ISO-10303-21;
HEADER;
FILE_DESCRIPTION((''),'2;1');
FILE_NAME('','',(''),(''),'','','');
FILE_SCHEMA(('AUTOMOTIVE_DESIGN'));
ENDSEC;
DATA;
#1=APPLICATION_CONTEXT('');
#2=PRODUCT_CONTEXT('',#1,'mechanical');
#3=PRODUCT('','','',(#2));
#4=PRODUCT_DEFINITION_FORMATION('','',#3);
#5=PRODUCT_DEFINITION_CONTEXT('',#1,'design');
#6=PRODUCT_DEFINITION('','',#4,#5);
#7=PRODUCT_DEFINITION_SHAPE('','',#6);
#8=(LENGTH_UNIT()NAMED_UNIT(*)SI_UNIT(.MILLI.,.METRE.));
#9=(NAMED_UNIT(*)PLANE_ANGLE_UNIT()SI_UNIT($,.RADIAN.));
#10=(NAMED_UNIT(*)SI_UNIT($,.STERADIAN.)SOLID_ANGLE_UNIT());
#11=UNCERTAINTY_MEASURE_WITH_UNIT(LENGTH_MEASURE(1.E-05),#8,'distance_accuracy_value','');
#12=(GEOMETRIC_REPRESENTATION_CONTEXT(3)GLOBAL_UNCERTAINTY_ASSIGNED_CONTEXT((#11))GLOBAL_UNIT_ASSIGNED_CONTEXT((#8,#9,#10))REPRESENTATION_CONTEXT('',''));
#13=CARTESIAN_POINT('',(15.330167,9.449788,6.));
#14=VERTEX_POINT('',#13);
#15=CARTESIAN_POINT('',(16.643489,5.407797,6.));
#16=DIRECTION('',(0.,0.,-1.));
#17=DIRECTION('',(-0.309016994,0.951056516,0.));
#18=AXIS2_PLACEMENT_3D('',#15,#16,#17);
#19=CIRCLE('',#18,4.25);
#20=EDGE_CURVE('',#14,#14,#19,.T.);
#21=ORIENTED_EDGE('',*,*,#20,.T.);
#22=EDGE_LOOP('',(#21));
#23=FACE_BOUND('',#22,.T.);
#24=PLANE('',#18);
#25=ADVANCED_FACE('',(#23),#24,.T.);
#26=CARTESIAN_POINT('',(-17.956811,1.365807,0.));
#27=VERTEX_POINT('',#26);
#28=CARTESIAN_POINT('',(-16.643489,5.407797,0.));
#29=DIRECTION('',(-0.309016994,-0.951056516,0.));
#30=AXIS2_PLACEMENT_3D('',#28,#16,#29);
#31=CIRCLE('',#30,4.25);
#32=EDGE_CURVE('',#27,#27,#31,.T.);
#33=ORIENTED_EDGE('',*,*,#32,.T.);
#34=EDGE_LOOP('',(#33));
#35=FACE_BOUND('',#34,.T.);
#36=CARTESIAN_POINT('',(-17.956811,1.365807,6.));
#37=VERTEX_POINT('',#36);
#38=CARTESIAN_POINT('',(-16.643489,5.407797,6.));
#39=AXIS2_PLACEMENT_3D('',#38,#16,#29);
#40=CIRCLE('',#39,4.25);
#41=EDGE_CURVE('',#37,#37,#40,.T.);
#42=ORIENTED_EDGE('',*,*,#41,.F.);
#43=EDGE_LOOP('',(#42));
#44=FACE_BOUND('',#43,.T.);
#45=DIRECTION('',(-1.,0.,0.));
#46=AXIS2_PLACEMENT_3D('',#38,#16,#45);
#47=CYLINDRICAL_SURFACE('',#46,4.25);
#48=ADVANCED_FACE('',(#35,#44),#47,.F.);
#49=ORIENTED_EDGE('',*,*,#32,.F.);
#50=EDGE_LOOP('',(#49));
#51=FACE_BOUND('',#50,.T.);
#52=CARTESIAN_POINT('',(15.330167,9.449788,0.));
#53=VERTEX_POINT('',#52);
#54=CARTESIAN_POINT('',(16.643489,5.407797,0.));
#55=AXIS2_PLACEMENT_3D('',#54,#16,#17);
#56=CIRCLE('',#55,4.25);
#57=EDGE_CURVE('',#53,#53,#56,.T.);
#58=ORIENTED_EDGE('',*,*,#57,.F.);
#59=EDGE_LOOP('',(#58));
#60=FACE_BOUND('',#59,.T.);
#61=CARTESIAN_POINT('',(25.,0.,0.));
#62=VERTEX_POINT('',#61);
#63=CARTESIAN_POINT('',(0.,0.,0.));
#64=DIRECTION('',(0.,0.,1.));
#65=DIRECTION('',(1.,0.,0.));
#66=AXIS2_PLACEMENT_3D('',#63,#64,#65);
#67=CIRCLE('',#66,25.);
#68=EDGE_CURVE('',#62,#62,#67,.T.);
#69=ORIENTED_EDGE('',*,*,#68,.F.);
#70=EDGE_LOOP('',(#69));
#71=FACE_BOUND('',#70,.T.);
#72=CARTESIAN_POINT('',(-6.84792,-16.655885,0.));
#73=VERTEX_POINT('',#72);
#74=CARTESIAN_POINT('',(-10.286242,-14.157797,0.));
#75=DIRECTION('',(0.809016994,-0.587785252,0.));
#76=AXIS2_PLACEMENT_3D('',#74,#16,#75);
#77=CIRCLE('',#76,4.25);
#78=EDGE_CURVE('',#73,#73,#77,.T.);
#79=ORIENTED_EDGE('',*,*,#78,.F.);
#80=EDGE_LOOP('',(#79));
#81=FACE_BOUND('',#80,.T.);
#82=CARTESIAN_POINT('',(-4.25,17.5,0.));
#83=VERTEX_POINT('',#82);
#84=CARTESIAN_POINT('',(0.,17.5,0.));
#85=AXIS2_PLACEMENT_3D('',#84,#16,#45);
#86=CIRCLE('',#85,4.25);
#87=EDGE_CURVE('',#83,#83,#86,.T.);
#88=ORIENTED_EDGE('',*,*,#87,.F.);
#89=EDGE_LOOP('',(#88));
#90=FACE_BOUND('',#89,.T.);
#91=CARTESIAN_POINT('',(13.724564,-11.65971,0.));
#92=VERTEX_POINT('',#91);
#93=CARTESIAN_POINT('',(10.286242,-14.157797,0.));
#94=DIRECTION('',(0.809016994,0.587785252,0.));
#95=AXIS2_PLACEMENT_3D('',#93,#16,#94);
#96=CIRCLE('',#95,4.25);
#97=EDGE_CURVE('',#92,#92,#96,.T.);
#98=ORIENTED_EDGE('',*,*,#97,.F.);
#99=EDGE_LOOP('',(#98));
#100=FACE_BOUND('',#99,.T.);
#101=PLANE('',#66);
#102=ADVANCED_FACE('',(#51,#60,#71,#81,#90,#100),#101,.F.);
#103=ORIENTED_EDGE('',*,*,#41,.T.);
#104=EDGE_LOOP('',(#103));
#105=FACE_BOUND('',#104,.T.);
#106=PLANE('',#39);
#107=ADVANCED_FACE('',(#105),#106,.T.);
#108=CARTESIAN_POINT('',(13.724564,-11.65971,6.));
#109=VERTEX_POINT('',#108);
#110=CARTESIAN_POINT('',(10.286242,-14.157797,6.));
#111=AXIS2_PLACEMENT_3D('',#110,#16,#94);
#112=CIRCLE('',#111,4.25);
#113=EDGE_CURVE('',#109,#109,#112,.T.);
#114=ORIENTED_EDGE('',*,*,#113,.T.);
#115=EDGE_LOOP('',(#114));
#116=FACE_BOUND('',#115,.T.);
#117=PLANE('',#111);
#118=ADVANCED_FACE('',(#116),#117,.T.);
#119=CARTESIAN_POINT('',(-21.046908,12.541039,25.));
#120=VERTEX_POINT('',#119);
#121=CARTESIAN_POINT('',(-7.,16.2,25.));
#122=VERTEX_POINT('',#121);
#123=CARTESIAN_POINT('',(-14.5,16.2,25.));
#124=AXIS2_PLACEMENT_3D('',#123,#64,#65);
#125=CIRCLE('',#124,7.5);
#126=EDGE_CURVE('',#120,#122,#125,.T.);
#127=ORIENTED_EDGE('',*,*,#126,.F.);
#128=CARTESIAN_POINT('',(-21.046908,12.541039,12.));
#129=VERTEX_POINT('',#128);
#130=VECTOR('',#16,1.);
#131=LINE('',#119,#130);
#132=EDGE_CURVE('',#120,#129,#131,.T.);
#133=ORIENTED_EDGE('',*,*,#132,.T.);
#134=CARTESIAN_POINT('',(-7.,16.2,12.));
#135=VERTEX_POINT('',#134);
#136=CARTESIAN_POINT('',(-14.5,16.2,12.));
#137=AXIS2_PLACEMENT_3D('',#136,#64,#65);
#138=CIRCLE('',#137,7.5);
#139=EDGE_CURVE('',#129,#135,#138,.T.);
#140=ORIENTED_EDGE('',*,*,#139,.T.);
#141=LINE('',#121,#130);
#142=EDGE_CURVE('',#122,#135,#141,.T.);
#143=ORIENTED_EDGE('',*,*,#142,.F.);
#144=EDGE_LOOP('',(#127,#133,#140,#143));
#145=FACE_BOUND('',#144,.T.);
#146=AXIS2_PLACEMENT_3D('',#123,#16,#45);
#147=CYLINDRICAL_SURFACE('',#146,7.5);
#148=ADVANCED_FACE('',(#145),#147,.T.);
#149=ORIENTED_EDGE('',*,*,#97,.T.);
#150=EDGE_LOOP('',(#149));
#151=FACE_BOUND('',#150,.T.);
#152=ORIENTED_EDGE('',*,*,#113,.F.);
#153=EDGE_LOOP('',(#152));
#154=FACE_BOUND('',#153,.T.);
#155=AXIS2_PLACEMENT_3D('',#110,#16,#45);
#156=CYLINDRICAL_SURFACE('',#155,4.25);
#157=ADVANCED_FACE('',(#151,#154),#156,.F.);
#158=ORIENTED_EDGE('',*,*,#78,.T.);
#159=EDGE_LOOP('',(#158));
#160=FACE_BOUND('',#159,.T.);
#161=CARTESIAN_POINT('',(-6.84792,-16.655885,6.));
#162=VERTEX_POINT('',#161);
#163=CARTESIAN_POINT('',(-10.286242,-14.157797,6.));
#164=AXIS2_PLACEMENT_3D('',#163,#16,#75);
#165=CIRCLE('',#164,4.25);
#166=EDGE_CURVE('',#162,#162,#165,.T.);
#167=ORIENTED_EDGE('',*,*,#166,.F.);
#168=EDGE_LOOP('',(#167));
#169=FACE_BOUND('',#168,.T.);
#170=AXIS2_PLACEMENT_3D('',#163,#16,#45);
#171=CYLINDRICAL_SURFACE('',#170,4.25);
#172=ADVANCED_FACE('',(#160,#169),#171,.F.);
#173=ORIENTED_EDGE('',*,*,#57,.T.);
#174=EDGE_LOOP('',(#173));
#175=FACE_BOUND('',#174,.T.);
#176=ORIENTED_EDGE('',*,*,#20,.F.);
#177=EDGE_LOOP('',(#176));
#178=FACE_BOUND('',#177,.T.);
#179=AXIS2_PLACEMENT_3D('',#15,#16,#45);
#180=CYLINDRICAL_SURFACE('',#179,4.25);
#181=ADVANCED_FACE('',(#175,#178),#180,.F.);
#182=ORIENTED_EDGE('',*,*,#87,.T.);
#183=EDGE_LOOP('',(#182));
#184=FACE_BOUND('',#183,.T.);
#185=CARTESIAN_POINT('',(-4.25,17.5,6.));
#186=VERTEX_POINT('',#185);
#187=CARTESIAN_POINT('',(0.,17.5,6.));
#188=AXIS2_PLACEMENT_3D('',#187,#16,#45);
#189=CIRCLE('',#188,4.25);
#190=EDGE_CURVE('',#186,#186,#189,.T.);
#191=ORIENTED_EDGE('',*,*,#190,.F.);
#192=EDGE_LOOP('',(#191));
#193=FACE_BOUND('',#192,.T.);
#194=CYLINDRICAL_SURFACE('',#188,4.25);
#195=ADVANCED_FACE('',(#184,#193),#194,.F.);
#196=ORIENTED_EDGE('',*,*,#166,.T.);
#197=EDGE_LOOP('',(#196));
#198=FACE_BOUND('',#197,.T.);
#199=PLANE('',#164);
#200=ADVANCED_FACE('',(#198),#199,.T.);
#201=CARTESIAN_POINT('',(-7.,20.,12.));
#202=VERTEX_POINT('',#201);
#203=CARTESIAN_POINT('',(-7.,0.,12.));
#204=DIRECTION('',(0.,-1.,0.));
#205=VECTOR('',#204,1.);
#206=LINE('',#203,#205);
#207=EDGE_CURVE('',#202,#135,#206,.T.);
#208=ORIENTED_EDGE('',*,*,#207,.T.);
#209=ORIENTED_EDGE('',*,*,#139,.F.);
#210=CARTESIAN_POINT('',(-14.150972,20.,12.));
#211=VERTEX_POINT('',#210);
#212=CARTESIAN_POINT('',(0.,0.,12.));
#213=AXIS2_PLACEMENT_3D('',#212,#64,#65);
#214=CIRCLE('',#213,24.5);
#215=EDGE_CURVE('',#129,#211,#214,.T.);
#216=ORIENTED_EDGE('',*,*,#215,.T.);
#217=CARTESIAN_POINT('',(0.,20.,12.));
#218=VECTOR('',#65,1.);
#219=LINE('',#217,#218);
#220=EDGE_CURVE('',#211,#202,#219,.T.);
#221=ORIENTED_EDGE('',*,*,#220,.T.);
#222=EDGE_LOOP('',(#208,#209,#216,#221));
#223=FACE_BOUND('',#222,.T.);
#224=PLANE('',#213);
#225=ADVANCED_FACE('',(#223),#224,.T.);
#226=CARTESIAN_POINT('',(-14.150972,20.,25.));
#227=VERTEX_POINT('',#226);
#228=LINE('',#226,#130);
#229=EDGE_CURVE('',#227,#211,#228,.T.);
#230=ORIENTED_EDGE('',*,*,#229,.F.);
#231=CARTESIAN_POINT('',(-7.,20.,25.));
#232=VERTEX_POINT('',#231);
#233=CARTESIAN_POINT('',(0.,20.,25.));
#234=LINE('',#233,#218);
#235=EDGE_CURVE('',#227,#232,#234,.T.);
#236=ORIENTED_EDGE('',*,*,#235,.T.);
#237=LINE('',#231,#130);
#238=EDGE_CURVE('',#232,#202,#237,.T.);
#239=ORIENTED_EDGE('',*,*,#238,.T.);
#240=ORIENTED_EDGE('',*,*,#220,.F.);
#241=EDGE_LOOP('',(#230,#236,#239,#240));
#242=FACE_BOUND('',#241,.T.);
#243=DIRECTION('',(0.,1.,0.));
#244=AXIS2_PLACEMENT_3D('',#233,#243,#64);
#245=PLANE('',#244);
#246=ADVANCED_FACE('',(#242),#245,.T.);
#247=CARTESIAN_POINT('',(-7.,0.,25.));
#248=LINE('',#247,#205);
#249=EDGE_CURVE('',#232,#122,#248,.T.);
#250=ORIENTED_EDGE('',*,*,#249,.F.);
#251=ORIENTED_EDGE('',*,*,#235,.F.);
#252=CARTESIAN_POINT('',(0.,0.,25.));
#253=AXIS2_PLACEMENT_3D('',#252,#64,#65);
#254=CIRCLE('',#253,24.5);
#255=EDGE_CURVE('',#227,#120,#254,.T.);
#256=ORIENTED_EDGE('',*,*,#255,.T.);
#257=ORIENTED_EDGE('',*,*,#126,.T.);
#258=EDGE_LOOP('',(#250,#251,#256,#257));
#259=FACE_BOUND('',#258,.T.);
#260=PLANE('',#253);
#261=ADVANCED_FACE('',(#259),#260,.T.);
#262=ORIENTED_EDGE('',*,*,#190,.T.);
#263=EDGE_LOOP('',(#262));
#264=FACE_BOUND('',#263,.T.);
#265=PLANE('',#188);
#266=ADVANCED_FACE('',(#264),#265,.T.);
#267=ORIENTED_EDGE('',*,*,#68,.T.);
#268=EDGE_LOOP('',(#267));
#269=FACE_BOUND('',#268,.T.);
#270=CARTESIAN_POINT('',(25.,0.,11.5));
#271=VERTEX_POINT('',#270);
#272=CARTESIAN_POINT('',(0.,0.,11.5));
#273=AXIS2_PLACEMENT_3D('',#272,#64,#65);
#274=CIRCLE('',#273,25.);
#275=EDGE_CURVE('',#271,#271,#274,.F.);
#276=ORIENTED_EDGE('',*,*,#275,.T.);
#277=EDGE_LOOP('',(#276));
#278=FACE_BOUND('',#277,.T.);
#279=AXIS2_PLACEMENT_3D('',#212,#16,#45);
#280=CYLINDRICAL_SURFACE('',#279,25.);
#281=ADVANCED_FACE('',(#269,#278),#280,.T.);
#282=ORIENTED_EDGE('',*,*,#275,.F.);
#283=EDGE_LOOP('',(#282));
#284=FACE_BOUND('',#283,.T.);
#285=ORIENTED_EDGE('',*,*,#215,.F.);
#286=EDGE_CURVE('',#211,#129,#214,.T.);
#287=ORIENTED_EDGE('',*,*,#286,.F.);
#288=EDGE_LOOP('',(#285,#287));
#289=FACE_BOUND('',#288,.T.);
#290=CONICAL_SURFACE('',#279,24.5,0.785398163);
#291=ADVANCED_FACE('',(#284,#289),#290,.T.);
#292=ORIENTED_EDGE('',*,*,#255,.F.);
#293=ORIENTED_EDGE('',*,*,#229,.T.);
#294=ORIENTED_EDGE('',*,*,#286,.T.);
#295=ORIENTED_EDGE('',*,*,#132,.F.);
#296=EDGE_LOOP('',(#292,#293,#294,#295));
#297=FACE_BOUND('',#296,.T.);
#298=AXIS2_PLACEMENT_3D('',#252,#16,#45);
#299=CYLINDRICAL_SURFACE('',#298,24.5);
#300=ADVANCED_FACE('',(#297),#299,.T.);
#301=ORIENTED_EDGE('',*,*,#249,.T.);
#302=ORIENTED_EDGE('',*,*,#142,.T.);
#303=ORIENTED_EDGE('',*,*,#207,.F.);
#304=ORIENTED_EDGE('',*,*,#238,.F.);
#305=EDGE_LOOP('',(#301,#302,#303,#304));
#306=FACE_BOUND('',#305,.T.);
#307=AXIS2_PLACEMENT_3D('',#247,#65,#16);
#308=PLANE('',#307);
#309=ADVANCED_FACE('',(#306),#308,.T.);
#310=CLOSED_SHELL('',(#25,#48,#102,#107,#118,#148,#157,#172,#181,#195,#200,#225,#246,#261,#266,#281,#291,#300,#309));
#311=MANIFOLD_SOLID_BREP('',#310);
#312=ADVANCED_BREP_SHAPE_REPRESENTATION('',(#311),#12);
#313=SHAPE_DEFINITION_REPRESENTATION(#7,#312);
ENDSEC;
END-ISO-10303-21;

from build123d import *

# Parameters (mm, degrees)
SKETCH1_R           = 25
BOSS_EXTRUDE1_DEPTH = 12
CHAMFER1_SIZE       = 0.5
BOSS_EXTRUDE2_DEPTH = 13
SKETCH4_R           = 4.25
CUT_EXTRUDE1_DEPTH  = 6
CIRPATTERN1_COUNT   = 5


# Read off the part's stored shape, not the designer's step: Boss-Extrude2
with BuildPart() as part:
    # Sketch1 → Boss-Extrude1 (new body)
    with BuildSketch(Plane.XY):
        Circle(SKETCH1_R)
    extrude(amount=BOSS_EXTRUDE1_DEPTH)

    # Chamfer1
    chamfer1_edges = [part.edges().sort_by_distance(p)[0] for p in [
        (-25, 0, 12),
    ]]
    chamfer(chamfer1_edges, length=CHAMFER1_SIZE)

    # Boss-Extrude2 outline → Boss-Extrude2 (add)
    with BuildSketch(Plane.XY.offset(12)):
        with BuildLine():
            ThreePointArc((-21.046908053, 12.541039089), (-12.609472348, 8.942183166), (-7, 16.2))
            Line((-7, 16.2), (-7, 20))
            Line((-7, 20), (-14.150971698, 20))
            ThreePointArc((-14.150971698, 20), (-17.989766791, 16.631845682), (-21.046908053, 12.541039089))
        make_face()
    extrude(amount=BOSS_EXTRUDE2_DEPTH)

    # Sketch4 → Cut-Extrude1 (cut)
    with BuildSketch(Plane(origin=(0, 0, 0), x_dir=(-1, 0, 0), z_dir=(0, 0, -1))):
        with Locations((0, 17.5)):
            Circle(SKETCH4_R)
    cut_extrude1 = extrude(amount=-CUT_EXTRUDE1_DEPTH, mode=Mode.SUBTRACT)

    # CirPattern1: Cut-Extrude1 ×5 about axis
    cirpattern1_axis = Axis((0, 0, 0), (0, 0, 1))
    for i in range(1, CIRPATTERN1_COUNT):
        add(cut_extrude1.rotate(cirpattern1_axis, i * 360 / CIRPATTERN1_COUNT), mode=Mode.SUBTRACT)


solid = part.part
